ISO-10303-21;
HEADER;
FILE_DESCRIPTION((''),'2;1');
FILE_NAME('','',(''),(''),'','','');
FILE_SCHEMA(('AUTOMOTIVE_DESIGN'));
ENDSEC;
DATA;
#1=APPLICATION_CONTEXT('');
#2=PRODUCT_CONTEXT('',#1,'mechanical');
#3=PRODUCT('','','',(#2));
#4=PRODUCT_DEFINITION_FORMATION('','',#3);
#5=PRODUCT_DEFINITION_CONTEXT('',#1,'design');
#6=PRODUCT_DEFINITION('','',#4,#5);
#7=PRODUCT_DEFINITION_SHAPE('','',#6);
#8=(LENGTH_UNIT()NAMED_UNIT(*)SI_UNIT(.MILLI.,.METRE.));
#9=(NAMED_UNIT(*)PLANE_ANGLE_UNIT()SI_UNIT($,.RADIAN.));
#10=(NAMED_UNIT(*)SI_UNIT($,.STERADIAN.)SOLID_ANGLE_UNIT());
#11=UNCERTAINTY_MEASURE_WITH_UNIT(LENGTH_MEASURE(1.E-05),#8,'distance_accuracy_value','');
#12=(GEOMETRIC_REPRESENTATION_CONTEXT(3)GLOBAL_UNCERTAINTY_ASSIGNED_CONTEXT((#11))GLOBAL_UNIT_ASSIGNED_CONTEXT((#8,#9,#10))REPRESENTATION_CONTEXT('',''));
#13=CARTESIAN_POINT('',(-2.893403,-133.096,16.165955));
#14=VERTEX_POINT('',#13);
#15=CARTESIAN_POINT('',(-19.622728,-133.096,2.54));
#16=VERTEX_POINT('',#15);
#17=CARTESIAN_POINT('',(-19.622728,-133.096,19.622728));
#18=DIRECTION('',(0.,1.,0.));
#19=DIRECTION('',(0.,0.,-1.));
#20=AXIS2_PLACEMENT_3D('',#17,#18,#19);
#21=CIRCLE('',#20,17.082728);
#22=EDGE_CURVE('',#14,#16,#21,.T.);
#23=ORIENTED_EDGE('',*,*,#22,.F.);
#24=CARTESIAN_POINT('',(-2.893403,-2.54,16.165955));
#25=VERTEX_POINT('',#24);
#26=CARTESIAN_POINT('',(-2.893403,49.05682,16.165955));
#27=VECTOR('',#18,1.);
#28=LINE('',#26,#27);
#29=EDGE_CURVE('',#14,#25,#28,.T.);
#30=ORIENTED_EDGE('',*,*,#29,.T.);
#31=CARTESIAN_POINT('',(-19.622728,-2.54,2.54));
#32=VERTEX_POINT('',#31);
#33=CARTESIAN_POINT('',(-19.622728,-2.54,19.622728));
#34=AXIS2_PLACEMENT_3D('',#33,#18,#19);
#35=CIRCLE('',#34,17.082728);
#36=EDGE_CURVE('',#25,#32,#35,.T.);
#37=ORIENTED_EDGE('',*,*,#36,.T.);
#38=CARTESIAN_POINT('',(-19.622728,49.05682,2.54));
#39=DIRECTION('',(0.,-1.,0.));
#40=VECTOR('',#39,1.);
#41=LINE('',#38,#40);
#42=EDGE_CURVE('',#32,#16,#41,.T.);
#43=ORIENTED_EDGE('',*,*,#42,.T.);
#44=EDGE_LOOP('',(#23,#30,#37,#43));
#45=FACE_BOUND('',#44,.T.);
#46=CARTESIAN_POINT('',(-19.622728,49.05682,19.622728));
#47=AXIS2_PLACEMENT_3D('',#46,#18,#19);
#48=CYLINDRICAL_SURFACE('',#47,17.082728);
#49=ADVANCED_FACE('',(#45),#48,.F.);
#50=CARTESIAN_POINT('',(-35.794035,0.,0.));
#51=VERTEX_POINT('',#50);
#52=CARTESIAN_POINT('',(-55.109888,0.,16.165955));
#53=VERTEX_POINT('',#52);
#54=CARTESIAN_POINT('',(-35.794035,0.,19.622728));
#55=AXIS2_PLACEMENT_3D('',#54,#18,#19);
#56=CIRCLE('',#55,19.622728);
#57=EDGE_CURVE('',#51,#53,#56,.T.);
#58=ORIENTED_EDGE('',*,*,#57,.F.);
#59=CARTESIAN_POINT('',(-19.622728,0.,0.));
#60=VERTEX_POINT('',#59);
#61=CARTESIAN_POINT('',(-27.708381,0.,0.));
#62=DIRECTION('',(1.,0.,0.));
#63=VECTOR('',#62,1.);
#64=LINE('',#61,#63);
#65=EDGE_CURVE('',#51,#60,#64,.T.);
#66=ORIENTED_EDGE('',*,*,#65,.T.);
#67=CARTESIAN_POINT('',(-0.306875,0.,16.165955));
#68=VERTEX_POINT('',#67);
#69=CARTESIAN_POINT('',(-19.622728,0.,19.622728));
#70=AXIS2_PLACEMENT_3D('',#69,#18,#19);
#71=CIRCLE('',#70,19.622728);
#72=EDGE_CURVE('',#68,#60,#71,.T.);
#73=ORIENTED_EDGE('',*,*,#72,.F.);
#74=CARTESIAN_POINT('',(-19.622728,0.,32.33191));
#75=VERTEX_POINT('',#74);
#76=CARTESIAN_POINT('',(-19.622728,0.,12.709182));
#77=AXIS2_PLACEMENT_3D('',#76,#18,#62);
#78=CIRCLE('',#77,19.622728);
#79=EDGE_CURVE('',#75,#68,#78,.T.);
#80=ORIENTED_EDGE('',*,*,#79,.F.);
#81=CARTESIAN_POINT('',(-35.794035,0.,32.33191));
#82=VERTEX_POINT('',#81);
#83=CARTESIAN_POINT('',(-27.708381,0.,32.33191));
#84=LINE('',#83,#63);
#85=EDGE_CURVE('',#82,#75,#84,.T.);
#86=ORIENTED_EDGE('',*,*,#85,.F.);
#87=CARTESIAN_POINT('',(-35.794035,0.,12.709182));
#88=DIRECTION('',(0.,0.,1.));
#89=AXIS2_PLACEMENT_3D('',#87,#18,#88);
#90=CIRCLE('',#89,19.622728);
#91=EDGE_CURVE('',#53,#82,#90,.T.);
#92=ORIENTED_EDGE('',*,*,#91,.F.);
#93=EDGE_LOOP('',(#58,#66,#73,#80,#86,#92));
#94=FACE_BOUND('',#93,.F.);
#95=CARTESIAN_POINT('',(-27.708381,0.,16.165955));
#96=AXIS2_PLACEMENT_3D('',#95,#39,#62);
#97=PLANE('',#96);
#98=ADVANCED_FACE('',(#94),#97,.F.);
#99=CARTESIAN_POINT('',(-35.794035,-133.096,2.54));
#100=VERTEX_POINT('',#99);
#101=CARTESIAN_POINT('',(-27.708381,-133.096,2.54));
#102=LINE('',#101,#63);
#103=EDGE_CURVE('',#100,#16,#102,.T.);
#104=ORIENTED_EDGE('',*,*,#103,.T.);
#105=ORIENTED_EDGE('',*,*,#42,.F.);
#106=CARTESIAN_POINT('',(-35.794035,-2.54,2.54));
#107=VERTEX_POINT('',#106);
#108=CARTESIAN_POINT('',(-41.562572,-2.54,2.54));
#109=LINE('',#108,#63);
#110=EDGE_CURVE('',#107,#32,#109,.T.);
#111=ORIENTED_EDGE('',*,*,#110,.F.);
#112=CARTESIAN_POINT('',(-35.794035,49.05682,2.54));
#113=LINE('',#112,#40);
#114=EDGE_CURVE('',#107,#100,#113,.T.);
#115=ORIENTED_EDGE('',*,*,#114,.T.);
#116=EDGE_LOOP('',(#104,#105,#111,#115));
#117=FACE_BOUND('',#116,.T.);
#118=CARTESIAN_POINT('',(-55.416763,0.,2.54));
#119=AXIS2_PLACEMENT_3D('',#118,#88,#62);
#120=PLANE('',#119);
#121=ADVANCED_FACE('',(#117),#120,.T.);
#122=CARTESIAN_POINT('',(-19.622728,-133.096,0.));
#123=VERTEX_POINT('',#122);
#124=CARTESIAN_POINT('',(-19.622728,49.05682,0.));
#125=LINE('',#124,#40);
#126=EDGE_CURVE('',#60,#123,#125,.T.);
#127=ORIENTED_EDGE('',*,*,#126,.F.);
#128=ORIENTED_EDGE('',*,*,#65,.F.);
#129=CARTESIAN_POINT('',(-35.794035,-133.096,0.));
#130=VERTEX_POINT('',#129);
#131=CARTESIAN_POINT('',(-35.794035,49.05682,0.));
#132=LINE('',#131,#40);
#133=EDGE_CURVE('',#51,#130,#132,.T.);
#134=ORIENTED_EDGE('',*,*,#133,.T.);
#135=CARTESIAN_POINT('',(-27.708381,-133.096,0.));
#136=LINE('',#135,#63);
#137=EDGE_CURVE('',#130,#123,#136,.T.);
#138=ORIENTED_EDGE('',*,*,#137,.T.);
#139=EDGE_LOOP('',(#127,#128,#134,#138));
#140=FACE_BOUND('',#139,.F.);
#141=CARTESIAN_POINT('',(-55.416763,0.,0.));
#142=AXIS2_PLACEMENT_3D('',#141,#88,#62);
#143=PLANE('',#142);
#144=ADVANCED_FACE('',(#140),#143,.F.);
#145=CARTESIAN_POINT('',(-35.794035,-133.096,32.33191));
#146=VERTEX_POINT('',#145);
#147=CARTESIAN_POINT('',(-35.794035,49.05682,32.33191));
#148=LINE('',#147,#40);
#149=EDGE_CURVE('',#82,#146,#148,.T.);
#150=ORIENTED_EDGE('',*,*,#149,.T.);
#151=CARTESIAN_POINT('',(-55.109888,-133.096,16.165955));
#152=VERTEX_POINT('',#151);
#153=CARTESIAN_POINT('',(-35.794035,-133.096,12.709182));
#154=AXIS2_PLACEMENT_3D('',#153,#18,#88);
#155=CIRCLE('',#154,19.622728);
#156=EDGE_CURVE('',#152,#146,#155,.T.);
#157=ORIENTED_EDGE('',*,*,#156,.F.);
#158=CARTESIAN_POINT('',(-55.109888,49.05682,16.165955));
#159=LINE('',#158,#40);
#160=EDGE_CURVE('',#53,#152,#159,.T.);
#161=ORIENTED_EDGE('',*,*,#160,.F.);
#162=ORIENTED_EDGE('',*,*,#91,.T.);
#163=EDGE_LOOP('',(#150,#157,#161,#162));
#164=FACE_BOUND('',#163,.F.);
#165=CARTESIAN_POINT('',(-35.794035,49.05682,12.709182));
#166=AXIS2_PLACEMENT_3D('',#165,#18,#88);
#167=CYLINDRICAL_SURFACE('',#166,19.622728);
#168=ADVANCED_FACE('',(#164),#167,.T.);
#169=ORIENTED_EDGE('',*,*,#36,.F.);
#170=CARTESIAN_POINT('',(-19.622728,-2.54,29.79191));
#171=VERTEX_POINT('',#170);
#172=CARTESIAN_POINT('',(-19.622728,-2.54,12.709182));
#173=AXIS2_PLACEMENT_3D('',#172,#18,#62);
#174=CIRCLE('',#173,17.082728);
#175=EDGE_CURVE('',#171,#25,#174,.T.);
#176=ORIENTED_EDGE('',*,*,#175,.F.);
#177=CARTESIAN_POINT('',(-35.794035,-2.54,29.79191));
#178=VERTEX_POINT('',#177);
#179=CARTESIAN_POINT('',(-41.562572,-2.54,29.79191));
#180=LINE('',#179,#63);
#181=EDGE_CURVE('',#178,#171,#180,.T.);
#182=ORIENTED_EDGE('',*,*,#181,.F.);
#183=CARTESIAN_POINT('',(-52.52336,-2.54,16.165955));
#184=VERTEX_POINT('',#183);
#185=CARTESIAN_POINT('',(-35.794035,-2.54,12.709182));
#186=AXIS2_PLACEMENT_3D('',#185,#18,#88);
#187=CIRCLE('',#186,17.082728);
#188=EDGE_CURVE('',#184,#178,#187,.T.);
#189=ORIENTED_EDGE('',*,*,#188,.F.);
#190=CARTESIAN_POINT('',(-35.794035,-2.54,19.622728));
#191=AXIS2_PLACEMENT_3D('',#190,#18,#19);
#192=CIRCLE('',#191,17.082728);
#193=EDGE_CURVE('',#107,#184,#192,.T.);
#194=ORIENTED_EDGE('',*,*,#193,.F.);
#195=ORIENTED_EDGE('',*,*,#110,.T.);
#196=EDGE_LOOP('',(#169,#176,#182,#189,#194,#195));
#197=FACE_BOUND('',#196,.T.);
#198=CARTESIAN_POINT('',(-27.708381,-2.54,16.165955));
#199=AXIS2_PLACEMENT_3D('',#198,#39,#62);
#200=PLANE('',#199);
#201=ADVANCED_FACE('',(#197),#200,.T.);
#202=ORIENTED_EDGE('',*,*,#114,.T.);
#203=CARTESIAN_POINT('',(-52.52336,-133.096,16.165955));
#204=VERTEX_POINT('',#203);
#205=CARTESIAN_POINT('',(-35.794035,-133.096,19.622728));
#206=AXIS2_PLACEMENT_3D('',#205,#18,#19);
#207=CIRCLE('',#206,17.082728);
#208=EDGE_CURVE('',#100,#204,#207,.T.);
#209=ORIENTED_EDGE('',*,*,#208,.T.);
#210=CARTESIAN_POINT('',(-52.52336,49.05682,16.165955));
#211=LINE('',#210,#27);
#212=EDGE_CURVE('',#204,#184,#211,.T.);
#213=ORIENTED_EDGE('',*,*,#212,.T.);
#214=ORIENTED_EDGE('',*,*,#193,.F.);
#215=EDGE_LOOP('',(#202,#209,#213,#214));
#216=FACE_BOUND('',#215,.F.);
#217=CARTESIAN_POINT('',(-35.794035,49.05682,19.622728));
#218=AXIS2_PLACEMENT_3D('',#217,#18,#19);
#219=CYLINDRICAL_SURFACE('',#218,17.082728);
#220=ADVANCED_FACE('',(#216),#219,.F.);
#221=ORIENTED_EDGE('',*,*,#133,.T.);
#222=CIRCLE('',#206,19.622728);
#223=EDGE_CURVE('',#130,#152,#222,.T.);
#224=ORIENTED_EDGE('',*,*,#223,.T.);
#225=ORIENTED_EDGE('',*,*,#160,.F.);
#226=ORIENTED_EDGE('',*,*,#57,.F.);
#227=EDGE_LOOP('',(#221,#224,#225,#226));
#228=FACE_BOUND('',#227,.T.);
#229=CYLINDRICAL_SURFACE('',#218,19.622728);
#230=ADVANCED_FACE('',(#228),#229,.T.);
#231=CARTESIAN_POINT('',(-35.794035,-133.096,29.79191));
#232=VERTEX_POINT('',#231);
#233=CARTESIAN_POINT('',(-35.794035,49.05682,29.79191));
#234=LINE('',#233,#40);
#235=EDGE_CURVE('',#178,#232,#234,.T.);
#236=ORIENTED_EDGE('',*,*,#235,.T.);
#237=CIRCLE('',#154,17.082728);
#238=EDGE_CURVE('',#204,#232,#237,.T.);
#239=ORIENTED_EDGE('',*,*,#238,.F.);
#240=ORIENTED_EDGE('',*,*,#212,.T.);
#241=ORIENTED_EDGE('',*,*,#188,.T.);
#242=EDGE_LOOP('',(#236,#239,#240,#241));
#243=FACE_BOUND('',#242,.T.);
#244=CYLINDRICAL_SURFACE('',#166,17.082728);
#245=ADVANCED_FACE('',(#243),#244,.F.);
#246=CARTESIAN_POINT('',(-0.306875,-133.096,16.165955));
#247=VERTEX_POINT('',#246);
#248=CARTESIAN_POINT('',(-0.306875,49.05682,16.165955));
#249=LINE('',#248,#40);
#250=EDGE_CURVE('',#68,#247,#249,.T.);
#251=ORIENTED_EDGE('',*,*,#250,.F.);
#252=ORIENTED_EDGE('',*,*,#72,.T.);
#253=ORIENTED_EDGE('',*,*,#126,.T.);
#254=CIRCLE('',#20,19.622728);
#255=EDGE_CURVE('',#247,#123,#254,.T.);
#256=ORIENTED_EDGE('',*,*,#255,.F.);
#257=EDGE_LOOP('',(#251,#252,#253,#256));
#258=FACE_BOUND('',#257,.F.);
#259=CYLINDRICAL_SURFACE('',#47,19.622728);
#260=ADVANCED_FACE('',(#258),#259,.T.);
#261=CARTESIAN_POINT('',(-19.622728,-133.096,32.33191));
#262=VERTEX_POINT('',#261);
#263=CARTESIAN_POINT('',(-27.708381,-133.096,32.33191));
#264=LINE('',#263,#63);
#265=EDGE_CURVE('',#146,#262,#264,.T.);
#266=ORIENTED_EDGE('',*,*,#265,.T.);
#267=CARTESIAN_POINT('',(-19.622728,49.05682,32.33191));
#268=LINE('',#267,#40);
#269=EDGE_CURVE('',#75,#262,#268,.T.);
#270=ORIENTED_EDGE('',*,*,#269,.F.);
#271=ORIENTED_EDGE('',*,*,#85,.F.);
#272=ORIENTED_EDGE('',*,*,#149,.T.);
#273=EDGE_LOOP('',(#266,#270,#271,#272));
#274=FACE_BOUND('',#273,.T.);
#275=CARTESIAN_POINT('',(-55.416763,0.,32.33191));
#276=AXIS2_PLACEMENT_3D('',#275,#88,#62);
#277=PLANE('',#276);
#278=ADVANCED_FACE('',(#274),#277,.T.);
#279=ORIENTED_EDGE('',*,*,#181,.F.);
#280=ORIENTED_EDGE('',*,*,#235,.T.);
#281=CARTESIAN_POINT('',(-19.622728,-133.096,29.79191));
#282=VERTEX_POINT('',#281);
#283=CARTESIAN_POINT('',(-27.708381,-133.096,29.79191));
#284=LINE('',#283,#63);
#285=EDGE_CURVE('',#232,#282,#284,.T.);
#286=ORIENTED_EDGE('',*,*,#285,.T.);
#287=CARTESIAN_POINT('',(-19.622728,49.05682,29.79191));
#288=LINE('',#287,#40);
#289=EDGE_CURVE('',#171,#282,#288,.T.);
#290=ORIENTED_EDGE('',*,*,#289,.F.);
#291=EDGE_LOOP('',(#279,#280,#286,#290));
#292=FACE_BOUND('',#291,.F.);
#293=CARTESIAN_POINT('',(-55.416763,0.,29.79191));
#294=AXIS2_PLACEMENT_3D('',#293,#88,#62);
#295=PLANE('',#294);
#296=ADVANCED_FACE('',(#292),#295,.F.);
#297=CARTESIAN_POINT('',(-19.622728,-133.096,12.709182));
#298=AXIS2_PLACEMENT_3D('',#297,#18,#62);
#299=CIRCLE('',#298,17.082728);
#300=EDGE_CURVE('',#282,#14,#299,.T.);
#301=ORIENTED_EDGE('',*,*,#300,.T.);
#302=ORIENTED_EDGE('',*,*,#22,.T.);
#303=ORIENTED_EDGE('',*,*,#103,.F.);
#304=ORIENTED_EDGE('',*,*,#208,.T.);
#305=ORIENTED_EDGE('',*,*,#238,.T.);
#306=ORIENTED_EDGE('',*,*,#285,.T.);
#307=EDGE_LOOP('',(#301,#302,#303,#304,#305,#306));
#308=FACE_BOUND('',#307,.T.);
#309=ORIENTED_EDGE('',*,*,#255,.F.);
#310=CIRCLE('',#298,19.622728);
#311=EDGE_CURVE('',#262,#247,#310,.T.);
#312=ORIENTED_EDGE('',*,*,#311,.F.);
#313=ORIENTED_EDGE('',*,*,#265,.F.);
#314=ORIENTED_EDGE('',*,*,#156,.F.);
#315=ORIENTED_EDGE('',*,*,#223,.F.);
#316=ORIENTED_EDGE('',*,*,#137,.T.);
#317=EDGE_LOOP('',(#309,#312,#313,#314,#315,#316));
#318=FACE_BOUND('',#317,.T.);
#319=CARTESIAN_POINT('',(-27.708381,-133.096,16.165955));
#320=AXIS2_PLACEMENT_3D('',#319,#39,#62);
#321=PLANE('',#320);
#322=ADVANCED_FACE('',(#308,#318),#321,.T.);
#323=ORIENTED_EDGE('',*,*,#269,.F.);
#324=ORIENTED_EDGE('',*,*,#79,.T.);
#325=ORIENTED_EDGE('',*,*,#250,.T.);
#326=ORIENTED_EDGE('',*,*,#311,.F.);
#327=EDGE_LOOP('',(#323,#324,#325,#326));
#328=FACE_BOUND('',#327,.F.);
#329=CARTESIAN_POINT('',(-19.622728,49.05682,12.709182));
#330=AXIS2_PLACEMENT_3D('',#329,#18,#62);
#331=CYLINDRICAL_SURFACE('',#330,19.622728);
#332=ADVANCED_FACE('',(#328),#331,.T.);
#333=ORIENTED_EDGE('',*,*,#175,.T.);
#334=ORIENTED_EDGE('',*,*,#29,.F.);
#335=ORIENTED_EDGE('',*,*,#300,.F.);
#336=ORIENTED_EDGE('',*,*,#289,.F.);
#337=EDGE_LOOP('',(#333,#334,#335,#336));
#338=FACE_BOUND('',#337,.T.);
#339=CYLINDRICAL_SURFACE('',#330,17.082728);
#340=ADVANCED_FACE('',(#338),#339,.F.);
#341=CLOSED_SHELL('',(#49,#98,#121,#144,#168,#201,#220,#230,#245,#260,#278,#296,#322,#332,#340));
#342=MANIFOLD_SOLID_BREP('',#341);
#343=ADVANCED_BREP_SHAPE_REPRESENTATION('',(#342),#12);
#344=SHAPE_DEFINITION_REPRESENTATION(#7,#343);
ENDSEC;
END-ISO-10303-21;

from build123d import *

# Parameters (mm, degrees)
F0_W        = 55.4167628288
F0_H        = 32.3319099844
F1_DEPTH    = 133.096
F2_T1_DEPTH = 231.2096391748
F3_T        = -2.54


# Not quite as in the source:
# - a fillet or chamfer that OpenCascade refuses, or shapes differently, is made with other operations: its cross-section is extruded or revolved along the edge and cut away or added


with BuildPart() as f1:
    # F0 (on Front) → F1 (new body)
    with BuildSketch(Plane.XZ):
        with Locations((-27.7083814144, 16.1659549922)):
            Rectangle(F0_W, F0_H)
    extrude(amount=F1_DEPTH)

    # F2: fillet of radius 19.622727835 on 4 edges, made by hand

    # F2_s2 → F2_t1 (cut)
    with BuildSketch(Plane.XZ.offset(-49.0568195874)):
        with BuildLine():
            ThreePointArc((-35.7940349939, 32.3319099844), (-49.6693989113, 26.5845460669), (-55.4167628288, 12.7091821494))
            Line((-55.4167628288, 12.7091821494), (-55.4167628288, 32.3319099844))
            Line((-55.4167628288, 32.3319099844), (-35.7940349939, 32.3319099844))
        make_face()
        with BuildLine():
            ThreePointArc((0, 12.7091821494), (-5.7473639175, 26.5845460669), (-19.622727835, 32.3319099844))
            Line((-19.622727835, 32.3319099844), (0, 32.3319099844))
            Line((0, 32.3319099844), (0, 12.7091821494))
        make_face()
        with BuildLine():
            ThreePointArc((-19.622727835, 0), (-5.7473639175, 5.7473639175), (0, 19.622727835))
            Line((0, 19.622727835), (0, 0))
            Line((0, 0), (-19.622727835, 0))
        make_face()
        with BuildLine():
            ThreePointArc((-35.7940349939, 0), (-49.6693989113, 5.7473639175), (-55.4167628288, 19.622727835))
            Line((-55.4167628288, 19.622727835), (-55.4167628288, 0))
            Line((-55.4167628288, 0), (-35.7940349939, 0))
        make_face()
    extrude(amount=F2_T1_DEPTH, mode=Mode.SUBTRACT)

    # F3
    f3_openings = [f1.faces().sort_by_distance(p)[0] for p in [
        (-27.708381, -133.096, 16.165955),
    ]]
    offset(amount=F3_T, openings=f3_openings)


solid = f1.part
